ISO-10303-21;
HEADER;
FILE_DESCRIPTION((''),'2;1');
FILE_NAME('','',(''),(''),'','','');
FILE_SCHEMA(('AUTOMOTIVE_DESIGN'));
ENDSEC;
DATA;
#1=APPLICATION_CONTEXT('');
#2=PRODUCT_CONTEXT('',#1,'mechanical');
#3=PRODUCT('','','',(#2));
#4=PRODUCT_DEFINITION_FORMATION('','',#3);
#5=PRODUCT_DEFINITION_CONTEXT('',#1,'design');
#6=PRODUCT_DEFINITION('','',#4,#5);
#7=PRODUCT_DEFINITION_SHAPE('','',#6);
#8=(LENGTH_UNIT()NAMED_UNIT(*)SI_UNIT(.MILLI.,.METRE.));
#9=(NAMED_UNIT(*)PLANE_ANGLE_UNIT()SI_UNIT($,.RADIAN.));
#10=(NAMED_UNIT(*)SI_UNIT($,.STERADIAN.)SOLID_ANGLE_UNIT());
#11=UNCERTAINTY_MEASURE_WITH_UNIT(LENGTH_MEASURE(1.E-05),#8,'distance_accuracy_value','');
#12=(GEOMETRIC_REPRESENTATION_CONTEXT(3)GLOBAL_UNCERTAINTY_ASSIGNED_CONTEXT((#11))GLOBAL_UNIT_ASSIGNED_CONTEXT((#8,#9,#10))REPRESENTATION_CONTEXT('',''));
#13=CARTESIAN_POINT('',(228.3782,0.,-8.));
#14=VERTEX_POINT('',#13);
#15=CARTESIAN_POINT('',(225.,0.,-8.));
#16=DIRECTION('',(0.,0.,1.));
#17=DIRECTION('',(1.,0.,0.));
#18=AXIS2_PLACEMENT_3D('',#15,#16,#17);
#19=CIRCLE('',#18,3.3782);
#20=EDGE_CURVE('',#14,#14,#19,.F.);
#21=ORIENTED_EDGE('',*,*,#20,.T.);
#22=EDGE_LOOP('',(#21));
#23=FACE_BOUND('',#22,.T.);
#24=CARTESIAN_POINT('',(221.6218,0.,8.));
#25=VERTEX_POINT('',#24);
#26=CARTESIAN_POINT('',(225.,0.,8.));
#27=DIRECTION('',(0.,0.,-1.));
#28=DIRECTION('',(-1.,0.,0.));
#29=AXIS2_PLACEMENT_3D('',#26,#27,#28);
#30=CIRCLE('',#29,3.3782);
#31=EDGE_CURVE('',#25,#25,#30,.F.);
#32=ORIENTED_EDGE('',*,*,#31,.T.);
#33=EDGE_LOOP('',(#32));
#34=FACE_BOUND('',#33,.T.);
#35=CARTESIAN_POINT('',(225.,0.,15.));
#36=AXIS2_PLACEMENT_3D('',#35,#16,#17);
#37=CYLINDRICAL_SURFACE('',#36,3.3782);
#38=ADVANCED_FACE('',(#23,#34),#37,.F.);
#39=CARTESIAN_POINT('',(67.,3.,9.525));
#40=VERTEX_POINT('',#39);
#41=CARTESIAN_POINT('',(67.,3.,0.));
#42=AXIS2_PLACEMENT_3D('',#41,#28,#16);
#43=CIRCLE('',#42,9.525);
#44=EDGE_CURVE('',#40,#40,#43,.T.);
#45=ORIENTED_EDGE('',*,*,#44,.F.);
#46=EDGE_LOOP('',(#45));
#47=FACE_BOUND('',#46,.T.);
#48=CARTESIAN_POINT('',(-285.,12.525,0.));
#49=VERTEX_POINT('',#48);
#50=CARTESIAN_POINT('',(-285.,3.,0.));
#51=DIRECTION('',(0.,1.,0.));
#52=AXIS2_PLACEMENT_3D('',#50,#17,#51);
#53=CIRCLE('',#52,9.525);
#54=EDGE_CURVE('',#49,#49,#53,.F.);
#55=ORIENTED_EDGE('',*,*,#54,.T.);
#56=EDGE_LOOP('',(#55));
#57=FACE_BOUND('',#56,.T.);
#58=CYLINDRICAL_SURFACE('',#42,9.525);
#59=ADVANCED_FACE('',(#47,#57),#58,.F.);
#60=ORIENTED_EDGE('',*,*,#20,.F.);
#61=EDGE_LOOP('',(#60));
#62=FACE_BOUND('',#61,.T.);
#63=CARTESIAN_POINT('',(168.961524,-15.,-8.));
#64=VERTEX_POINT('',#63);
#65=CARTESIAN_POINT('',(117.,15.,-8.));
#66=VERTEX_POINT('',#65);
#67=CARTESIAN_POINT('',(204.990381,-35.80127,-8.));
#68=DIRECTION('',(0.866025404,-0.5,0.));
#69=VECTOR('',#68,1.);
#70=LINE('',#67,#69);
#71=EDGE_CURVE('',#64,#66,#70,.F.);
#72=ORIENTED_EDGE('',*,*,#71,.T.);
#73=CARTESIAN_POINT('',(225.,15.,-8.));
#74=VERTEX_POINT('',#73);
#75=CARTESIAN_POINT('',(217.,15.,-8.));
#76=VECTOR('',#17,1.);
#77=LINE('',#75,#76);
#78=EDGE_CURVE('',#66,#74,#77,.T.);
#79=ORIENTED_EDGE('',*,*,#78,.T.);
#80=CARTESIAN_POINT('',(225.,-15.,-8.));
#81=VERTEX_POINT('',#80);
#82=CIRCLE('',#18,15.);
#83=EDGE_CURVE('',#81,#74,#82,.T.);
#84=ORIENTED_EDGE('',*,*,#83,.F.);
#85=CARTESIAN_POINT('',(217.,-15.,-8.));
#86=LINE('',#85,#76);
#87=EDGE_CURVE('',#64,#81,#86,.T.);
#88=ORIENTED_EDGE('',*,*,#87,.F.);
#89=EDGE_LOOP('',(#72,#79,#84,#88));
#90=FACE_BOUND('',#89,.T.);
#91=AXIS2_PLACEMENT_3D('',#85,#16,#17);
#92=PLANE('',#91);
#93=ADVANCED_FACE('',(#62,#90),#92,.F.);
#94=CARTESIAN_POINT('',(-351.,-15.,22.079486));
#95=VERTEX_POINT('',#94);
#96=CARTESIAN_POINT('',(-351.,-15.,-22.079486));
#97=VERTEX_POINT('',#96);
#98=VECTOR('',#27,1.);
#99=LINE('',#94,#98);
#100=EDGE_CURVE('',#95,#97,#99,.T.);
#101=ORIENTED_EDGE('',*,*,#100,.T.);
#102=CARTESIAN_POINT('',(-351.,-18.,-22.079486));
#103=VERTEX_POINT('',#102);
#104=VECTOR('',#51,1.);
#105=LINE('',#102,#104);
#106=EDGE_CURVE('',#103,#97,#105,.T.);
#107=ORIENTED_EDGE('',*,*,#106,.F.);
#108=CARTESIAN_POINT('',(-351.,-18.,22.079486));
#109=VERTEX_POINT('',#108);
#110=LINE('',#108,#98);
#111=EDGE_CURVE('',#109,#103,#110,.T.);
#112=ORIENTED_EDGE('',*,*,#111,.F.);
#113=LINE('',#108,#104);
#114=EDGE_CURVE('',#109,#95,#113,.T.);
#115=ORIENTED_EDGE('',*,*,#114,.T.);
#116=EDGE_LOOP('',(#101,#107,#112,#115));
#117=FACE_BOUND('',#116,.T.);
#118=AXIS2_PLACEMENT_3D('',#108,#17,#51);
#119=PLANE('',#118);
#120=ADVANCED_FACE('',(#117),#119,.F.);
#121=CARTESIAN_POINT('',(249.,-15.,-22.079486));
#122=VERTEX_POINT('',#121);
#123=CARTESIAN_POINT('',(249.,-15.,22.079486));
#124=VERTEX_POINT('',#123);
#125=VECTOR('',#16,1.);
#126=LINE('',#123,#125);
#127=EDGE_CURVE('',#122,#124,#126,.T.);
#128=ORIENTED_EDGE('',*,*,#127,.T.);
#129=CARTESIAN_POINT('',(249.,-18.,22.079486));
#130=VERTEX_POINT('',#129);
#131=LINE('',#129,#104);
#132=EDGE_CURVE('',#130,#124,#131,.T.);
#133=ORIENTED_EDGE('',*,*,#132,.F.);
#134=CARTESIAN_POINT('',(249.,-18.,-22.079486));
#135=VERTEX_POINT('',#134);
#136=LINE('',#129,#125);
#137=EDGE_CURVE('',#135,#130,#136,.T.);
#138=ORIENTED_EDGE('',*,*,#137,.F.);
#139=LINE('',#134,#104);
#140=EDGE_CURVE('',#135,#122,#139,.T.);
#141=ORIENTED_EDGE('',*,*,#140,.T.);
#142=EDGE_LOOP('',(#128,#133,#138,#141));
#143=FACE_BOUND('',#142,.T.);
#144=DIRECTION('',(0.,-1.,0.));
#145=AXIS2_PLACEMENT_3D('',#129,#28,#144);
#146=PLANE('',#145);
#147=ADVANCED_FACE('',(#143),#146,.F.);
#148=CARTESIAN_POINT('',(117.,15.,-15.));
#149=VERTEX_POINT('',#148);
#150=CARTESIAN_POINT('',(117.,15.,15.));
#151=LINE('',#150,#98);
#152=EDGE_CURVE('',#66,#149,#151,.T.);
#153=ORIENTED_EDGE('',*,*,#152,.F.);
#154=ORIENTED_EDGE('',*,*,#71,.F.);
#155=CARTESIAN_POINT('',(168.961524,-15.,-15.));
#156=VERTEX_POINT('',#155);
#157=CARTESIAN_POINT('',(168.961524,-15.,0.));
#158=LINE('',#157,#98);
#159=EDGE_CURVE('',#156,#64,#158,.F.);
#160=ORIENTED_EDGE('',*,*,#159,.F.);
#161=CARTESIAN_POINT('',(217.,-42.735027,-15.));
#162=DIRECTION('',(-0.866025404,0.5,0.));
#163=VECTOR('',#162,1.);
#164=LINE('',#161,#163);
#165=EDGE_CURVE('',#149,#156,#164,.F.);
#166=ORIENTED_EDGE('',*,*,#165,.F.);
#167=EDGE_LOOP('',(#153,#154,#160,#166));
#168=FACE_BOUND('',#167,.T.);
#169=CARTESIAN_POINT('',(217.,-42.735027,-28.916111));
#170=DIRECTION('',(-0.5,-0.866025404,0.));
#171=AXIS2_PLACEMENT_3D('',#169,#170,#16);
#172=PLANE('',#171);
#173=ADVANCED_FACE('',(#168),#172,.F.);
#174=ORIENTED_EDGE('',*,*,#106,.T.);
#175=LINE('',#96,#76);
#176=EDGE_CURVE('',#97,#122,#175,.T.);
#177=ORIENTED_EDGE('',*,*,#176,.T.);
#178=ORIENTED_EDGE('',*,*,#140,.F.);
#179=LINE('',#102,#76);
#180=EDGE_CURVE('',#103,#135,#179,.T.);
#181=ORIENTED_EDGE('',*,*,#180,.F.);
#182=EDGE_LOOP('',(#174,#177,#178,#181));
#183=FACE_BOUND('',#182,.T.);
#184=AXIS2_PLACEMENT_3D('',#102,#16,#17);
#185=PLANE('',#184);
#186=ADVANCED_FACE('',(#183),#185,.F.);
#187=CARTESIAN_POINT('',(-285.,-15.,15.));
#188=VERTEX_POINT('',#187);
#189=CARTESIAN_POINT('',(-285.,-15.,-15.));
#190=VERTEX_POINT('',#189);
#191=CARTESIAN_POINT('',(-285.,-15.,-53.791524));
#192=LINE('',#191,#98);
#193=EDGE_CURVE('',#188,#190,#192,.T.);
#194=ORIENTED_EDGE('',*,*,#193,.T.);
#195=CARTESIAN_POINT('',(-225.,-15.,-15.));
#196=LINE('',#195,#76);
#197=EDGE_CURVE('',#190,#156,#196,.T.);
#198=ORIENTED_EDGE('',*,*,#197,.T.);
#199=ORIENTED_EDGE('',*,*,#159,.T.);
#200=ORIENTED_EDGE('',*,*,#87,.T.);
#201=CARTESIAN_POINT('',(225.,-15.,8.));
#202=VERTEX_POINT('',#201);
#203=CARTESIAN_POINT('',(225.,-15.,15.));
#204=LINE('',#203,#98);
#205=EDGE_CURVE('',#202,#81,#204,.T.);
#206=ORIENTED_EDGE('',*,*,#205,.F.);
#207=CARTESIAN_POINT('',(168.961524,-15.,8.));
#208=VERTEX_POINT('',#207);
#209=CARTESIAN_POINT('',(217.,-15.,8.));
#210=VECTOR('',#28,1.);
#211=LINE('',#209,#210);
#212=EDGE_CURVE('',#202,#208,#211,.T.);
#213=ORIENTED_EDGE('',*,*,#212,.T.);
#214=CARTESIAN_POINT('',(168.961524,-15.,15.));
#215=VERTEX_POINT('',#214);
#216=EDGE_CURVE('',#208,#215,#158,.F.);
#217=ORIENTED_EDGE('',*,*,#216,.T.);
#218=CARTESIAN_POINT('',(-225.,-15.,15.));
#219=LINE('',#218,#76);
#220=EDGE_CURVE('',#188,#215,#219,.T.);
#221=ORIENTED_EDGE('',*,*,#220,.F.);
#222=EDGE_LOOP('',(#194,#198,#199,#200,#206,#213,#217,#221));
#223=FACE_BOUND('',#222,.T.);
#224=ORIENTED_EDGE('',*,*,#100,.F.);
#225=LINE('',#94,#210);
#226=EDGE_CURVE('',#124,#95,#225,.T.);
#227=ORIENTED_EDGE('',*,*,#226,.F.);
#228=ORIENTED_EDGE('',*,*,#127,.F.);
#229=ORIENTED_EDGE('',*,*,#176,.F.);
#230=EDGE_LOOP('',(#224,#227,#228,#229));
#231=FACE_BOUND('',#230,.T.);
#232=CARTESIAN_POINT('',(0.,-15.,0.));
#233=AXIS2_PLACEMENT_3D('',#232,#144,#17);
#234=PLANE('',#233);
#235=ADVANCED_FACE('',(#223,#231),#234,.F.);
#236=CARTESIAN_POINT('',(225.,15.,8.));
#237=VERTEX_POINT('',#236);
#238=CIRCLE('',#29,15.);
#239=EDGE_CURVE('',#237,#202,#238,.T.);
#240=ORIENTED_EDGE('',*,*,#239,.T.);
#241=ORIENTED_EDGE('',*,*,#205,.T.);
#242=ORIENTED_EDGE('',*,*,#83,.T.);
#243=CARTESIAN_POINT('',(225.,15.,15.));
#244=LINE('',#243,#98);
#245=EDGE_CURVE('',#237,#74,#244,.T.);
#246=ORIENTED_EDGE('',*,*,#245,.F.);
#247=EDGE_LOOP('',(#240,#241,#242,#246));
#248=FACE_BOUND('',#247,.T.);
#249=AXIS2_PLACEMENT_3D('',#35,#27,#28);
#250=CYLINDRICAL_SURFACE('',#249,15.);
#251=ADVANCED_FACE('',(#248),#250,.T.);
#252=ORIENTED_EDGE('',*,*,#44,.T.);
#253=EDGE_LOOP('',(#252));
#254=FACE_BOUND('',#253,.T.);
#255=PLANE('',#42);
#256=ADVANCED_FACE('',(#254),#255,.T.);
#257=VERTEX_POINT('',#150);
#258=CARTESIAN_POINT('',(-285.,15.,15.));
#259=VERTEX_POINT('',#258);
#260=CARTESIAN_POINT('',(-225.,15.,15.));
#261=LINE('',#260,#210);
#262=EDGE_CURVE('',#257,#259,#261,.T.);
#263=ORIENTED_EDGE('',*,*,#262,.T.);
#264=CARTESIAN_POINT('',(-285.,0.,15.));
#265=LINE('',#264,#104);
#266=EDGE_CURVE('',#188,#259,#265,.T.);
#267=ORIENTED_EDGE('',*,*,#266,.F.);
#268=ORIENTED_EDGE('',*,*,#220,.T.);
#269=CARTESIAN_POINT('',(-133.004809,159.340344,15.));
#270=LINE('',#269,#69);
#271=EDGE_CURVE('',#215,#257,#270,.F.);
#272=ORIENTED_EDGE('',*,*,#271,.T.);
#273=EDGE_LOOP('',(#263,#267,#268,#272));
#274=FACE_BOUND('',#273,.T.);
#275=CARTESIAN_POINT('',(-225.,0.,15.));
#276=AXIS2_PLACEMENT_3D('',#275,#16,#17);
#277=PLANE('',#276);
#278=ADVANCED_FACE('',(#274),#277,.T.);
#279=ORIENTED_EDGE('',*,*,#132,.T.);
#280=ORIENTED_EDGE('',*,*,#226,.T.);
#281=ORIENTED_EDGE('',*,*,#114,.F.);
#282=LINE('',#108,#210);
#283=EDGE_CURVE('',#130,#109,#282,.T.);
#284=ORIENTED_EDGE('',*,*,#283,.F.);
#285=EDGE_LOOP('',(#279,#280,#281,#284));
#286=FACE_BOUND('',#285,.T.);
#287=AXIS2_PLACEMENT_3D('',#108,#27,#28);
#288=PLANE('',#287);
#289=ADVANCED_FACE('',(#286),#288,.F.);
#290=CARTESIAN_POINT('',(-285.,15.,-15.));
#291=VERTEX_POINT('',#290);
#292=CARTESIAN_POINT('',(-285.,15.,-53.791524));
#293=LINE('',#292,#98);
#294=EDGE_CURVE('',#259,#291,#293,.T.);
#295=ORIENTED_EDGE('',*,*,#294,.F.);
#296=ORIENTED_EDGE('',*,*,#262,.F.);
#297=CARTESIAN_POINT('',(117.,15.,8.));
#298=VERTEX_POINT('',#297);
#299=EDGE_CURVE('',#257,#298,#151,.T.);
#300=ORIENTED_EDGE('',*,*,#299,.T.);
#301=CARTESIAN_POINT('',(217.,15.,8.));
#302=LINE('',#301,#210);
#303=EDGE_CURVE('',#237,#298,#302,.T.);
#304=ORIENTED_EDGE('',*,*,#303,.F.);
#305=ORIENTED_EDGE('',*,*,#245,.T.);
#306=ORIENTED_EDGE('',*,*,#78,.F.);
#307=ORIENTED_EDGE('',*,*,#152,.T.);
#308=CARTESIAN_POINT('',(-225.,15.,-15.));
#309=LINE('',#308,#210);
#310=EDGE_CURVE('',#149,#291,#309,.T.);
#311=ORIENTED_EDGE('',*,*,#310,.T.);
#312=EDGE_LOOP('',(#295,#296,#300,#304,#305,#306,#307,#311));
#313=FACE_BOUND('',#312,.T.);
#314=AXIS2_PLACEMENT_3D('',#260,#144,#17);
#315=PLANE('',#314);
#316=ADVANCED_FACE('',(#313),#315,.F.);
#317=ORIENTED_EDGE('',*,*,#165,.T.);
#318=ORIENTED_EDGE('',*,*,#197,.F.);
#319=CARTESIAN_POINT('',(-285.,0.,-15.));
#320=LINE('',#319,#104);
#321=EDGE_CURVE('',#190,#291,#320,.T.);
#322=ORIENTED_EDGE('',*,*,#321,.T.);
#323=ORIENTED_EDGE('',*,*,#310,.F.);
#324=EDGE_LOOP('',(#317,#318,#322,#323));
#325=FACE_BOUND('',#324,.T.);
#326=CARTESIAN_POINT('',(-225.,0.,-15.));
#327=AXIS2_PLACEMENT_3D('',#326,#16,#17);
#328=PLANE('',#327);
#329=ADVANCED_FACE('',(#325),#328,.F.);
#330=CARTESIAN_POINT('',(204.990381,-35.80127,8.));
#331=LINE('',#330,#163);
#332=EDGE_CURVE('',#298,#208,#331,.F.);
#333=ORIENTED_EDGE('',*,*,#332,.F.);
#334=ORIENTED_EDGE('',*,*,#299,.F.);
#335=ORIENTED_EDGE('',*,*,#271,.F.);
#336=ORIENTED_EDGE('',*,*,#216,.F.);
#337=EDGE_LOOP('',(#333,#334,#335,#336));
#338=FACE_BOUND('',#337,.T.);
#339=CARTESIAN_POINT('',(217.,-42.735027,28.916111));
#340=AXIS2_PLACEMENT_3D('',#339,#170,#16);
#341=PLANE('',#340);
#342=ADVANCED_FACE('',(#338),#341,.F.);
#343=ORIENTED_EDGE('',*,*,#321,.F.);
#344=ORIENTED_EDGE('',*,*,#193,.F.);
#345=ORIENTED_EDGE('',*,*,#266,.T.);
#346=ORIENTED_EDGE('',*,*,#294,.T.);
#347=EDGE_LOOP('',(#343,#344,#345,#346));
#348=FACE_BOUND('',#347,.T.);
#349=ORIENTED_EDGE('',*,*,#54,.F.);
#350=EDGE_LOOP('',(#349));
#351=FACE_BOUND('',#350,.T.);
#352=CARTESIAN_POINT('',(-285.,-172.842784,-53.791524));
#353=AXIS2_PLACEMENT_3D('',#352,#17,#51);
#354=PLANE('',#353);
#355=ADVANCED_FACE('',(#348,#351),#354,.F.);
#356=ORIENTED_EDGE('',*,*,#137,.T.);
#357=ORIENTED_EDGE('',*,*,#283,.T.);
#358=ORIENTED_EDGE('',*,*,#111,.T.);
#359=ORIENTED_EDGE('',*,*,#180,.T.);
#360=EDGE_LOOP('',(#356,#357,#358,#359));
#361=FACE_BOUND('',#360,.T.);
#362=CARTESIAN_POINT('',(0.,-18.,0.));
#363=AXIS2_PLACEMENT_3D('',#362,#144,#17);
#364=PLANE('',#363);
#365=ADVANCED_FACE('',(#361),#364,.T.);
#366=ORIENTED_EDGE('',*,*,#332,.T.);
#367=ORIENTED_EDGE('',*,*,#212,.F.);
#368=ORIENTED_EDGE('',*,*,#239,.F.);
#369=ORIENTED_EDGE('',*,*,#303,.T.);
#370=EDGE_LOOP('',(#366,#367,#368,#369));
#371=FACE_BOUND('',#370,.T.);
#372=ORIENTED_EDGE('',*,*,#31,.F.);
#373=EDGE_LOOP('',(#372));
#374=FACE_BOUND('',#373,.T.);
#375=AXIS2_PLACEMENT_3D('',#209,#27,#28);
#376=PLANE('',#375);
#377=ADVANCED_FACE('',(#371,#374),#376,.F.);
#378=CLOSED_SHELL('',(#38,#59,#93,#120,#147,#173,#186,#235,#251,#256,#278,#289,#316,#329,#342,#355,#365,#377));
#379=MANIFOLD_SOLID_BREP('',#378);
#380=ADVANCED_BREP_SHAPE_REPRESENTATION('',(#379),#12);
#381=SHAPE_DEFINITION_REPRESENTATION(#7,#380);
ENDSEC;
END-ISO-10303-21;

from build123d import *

# Parameters (mm, degrees)
BOSS_EXTRUDE1_DEPTH      = 15
H_0_266_DIAMETER_HOLE1_D = 6.7564
SKETCH5_W                = 40
SKETCH5_H                = 16
SKETCH5_H_2              = 20.916111238
CUT_EXTRUDE1_DEPTH       = 243.332416321
SKETCH6_W                = 429.036778435
SKETCH6_H                = 127.431795429
CUT_EXTRUDE2_DEPTH       = 243.332416321
SKETCH10_W               = 30
SKETCH10_H               = 30
BOSS_EXTRUDE3_DEPTH      = 500
SKETCH11_R               = 9.525
CUT_EXTRUDE4_DEPTH       = 400
SKETCH13_W               = 600
SKETCH13_H               = 44.158972604
BOSS_EXTRUDE4_DEPTH      = 3
SKETCH14_W               = 111.034909532
SKETCH14_H               = 112.185530356
CUT_EXTRUDE5_DEPTH       = 30
CHAMFER1_SIZE            = 100
CHAMFER1_SIZE_2          = 57.735026919


with BuildPart() as part:
    # Sketch1 → Boss-Extrude1 (new, symmetric)
    with BuildSketch(Plane.XY):
        with BuildLine():
            Line((-225, 15), (225, 15))
            ThreePointArc((225, 15), (240, 0), (225, -15))
            Line((225, -15), (-225, -15))
            ThreePointArc((-225, -15), (-240, 0), (-225, 15))
        make_face()
    extrude(amount=BOSS_EXTRUDE1_DEPTH, both=True)

    # H (0.266) Diameter Hole1 (through all)
    with Locations(Plane.XY.offset(15)):
        with Locations((-225, 0), (225, 0)):
            Hole(H_0_266_DIAMETER_HOLE1_D / 2)

    # Sketch5 → Cut-Extrude1 (cut, through all)
    with BuildSketch(Plane(origin=(0, 15, 0), x_dir=(1, 0, 0), z_dir=(0, 1, 0))):
        with Locations((-237, 0)):
            Rectangle(SKETCH5_W, SKETCH5_H)
        with Locations((237, 18.458055619)):
            Rectangle(SKETCH5_W, SKETCH5_H_2)
        with Locations((237, -18.458055619)):
            Rectangle(SKETCH5_W, SKETCH5_H_2)
    extrude(amount=-CUT_EXTRUDE1_DEPTH, mode=Mode.SUBTRACT)

    # Sketch6 → Cut-Extrude2 (cut, through all)
    with BuildSketch(Plane(origin=(0, 15, 0), x_dir=(1, 0, 0), z_dir=(0, 1, 0))):
        with Locations((-47.518389218, -4.674139215)):
            Rectangle(SKETCH6_W, SKETCH6_H)
    extrude(amount=-CUT_EXTRUDE2_DEPTH, mode=Mode.SUBTRACT)

    # Sketch10 → Boss-Extrude3 (add)
    with BuildSketch(Plane.ZY.offset(-167)):
        Rectangle(SKETCH10_W, SKETCH10_H)
    extrude(amount=BOSS_EXTRUDE3_DEPTH)

    # Sketch11 → Cut-Extrude4 (cut)
    with BuildSketch(Plane.ZY.offset(333)):
        with Locations((0, 3)):
            Circle(SKETCH11_R)
    extrude(amount=-CUT_EXTRUDE4_DEPTH, mode=Mode.SUBTRACT)

    # Sketch13 → Boss-Extrude4 (add)
    with BuildSketch(Plane(origin=(0, -15, 0), x_dir=(-1, 0, 0), z_dir=(0, -1, 0))):
        with Locations((51, 0)):
            Rectangle(SKETCH13_W, SKETCH13_H)
    extrude(amount=BOSS_EXTRUDE4_DEPTH)

    # Sketch14 → Cut-Extrude5 (cut)
    with BuildSketch(Plane(origin=(0, 15, 0), x_dir=(1, 0, 0), z_dir=(0, 1, 0))):
        with Locations((-340.517454766, -2.301241648)):
            Rectangle(SKETCH14_W, SKETCH14_H)
    extrude(amount=-CUT_EXTRUDE5_DEPTH, mode=Mode.SUBTRACT)

    # Chamfer1
    # the kernel refuses this chamfer: 100, 57.735026919 mm, written as the material it takes off along each edge
    with BuildSketch(Plane(origin=(217, 15, 250.708575465), x_dir=(-0.9998132206222079, 0.01932676561270057, 2.717178209496515e-15), z_dir=(0, 0, -1))) as chamfer1_piece_1_section:
        Polygon((CHAMFER1_SIZE * 0.999813220622, -CHAMFER1_SIZE * 0.0193267656127), (-CHAMFER1_SIZE_2 * 0.0193267656127, -CHAMFER1_SIZE_2 * 0.999813220622), (0, 0), align=None)
    chamfer1_piece_1 = extrude(amount=524.417150929, mode=Mode.PRIVATE)
    chamfer1_piece_1 = split(chamfer1_piece_1, bisect_by=Plane(origin=(178.470505911, -15, 11.5), z_dir=(0, 1, 0)), keep=Keep.TOP, mode=Mode.PRIVATE)
    chamfer1_piece_1 = split(chamfer1_piece_1, bisect_by=Plane(origin=(178.470505911, 1.75500065, 8), z_dir=(0, 0, 1)), keep=Keep.TOP, mode=Mode.PRIVATE)
    add(chamfer1_piece_1, mode=Mode.SUBTRACT)
    with BuildSketch(Plane(origin=(217, 15, -8), x_dir=(-0.9998132206222079, 0.019326765612700587, 2.717178209496515e-15), z_dir=(0, 0, -1))) as chamfer1_piece_2_section:
        Polygon((CHAMFER1_SIZE * 0.999813220622, -CHAMFER1_SIZE * 0.0193267656127), (-CHAMFER1_SIZE_2 * 0.0193267656127, -CHAMFER1_SIZE_2 * 0.999813220622), (0, 0), align=None)
    chamfer1_piece_2 = extrude(amount=265.708575465, mode=Mode.PRIVATE)
    chamfer1_piece_2 = split(chamfer1_piece_2, bisect_by=Plane(origin=(178.470505911, -15, -11.5), z_dir=(0, 1, 0)), keep=Keep.TOP, mode=Mode.PRIVATE)
    add(chamfer1_piece_2, mode=Mode.SUBTRACT)
    with BuildSketch(Plane(origin=(217, 15, -250.708575465), x_dir=(0.057893862402671484, -0.9983227437537925, 0), z_dir=(0, 0, 1))) as chamfer1_piece_3_section:
        Polygon((CHAMFER1_SIZE_2 * 0.998322743753, -CHAMFER1_SIZE_2 * 0.0578938624026), (-CHAMFER1_SIZE * 0.0578938624027, -CHAMFER1_SIZE * 0.998322743754), (0, 0), align=None)
    chamfer1_piece_3 = extrude(amount=524.417150929, mode=Mode.PRIVATE)
    chamfer1_piece_3 = split(chamfer1_piece_3, bisect_by=Plane(origin=(178.470505911, -15, -11.5), z_dir=(0, 1, 0)), keep=Keep.TOP, mode=Mode.PRIVATE)
    chamfer1_piece_3 = split(chamfer1_piece_3, bisect_by=Plane(origin=(178.470505911, 1.75500065, -8), z_dir=(0, 0, -1)), keep=Keep.TOP, mode=Mode.PRIVATE)
    add(chamfer1_piece_3, mode=Mode.SUBTRACT)
    with BuildSketch(Plane(origin=(217, 15, 8), x_dir=(0.05789386240267099, -0.9983227437537925, 0), z_dir=(0, 0, 1))) as chamfer1_piece_4_section:
        Polygon((CHAMFER1_SIZE_2 * 0.998322743753, -CHAMFER1_SIZE_2 * 0.0578938624026), (-CHAMFER1_SIZE * 0.0578938624027, -CHAMFER1_SIZE * 0.998322743754), (0, 0), align=None)
    chamfer1_piece_4 = extrude(amount=265.708575465, mode=Mode.PRIVATE)
    chamfer1_piece_4 = split(chamfer1_piece_4, bisect_by=Plane(origin=(178.470505911, -15, 11.5), z_dir=(0, 1, 0)), keep=Keep.TOP, mode=Mode.PRIVATE)
    add(chamfer1_piece_4, mode=Mode.SUBTRACT)


solid = part.part
